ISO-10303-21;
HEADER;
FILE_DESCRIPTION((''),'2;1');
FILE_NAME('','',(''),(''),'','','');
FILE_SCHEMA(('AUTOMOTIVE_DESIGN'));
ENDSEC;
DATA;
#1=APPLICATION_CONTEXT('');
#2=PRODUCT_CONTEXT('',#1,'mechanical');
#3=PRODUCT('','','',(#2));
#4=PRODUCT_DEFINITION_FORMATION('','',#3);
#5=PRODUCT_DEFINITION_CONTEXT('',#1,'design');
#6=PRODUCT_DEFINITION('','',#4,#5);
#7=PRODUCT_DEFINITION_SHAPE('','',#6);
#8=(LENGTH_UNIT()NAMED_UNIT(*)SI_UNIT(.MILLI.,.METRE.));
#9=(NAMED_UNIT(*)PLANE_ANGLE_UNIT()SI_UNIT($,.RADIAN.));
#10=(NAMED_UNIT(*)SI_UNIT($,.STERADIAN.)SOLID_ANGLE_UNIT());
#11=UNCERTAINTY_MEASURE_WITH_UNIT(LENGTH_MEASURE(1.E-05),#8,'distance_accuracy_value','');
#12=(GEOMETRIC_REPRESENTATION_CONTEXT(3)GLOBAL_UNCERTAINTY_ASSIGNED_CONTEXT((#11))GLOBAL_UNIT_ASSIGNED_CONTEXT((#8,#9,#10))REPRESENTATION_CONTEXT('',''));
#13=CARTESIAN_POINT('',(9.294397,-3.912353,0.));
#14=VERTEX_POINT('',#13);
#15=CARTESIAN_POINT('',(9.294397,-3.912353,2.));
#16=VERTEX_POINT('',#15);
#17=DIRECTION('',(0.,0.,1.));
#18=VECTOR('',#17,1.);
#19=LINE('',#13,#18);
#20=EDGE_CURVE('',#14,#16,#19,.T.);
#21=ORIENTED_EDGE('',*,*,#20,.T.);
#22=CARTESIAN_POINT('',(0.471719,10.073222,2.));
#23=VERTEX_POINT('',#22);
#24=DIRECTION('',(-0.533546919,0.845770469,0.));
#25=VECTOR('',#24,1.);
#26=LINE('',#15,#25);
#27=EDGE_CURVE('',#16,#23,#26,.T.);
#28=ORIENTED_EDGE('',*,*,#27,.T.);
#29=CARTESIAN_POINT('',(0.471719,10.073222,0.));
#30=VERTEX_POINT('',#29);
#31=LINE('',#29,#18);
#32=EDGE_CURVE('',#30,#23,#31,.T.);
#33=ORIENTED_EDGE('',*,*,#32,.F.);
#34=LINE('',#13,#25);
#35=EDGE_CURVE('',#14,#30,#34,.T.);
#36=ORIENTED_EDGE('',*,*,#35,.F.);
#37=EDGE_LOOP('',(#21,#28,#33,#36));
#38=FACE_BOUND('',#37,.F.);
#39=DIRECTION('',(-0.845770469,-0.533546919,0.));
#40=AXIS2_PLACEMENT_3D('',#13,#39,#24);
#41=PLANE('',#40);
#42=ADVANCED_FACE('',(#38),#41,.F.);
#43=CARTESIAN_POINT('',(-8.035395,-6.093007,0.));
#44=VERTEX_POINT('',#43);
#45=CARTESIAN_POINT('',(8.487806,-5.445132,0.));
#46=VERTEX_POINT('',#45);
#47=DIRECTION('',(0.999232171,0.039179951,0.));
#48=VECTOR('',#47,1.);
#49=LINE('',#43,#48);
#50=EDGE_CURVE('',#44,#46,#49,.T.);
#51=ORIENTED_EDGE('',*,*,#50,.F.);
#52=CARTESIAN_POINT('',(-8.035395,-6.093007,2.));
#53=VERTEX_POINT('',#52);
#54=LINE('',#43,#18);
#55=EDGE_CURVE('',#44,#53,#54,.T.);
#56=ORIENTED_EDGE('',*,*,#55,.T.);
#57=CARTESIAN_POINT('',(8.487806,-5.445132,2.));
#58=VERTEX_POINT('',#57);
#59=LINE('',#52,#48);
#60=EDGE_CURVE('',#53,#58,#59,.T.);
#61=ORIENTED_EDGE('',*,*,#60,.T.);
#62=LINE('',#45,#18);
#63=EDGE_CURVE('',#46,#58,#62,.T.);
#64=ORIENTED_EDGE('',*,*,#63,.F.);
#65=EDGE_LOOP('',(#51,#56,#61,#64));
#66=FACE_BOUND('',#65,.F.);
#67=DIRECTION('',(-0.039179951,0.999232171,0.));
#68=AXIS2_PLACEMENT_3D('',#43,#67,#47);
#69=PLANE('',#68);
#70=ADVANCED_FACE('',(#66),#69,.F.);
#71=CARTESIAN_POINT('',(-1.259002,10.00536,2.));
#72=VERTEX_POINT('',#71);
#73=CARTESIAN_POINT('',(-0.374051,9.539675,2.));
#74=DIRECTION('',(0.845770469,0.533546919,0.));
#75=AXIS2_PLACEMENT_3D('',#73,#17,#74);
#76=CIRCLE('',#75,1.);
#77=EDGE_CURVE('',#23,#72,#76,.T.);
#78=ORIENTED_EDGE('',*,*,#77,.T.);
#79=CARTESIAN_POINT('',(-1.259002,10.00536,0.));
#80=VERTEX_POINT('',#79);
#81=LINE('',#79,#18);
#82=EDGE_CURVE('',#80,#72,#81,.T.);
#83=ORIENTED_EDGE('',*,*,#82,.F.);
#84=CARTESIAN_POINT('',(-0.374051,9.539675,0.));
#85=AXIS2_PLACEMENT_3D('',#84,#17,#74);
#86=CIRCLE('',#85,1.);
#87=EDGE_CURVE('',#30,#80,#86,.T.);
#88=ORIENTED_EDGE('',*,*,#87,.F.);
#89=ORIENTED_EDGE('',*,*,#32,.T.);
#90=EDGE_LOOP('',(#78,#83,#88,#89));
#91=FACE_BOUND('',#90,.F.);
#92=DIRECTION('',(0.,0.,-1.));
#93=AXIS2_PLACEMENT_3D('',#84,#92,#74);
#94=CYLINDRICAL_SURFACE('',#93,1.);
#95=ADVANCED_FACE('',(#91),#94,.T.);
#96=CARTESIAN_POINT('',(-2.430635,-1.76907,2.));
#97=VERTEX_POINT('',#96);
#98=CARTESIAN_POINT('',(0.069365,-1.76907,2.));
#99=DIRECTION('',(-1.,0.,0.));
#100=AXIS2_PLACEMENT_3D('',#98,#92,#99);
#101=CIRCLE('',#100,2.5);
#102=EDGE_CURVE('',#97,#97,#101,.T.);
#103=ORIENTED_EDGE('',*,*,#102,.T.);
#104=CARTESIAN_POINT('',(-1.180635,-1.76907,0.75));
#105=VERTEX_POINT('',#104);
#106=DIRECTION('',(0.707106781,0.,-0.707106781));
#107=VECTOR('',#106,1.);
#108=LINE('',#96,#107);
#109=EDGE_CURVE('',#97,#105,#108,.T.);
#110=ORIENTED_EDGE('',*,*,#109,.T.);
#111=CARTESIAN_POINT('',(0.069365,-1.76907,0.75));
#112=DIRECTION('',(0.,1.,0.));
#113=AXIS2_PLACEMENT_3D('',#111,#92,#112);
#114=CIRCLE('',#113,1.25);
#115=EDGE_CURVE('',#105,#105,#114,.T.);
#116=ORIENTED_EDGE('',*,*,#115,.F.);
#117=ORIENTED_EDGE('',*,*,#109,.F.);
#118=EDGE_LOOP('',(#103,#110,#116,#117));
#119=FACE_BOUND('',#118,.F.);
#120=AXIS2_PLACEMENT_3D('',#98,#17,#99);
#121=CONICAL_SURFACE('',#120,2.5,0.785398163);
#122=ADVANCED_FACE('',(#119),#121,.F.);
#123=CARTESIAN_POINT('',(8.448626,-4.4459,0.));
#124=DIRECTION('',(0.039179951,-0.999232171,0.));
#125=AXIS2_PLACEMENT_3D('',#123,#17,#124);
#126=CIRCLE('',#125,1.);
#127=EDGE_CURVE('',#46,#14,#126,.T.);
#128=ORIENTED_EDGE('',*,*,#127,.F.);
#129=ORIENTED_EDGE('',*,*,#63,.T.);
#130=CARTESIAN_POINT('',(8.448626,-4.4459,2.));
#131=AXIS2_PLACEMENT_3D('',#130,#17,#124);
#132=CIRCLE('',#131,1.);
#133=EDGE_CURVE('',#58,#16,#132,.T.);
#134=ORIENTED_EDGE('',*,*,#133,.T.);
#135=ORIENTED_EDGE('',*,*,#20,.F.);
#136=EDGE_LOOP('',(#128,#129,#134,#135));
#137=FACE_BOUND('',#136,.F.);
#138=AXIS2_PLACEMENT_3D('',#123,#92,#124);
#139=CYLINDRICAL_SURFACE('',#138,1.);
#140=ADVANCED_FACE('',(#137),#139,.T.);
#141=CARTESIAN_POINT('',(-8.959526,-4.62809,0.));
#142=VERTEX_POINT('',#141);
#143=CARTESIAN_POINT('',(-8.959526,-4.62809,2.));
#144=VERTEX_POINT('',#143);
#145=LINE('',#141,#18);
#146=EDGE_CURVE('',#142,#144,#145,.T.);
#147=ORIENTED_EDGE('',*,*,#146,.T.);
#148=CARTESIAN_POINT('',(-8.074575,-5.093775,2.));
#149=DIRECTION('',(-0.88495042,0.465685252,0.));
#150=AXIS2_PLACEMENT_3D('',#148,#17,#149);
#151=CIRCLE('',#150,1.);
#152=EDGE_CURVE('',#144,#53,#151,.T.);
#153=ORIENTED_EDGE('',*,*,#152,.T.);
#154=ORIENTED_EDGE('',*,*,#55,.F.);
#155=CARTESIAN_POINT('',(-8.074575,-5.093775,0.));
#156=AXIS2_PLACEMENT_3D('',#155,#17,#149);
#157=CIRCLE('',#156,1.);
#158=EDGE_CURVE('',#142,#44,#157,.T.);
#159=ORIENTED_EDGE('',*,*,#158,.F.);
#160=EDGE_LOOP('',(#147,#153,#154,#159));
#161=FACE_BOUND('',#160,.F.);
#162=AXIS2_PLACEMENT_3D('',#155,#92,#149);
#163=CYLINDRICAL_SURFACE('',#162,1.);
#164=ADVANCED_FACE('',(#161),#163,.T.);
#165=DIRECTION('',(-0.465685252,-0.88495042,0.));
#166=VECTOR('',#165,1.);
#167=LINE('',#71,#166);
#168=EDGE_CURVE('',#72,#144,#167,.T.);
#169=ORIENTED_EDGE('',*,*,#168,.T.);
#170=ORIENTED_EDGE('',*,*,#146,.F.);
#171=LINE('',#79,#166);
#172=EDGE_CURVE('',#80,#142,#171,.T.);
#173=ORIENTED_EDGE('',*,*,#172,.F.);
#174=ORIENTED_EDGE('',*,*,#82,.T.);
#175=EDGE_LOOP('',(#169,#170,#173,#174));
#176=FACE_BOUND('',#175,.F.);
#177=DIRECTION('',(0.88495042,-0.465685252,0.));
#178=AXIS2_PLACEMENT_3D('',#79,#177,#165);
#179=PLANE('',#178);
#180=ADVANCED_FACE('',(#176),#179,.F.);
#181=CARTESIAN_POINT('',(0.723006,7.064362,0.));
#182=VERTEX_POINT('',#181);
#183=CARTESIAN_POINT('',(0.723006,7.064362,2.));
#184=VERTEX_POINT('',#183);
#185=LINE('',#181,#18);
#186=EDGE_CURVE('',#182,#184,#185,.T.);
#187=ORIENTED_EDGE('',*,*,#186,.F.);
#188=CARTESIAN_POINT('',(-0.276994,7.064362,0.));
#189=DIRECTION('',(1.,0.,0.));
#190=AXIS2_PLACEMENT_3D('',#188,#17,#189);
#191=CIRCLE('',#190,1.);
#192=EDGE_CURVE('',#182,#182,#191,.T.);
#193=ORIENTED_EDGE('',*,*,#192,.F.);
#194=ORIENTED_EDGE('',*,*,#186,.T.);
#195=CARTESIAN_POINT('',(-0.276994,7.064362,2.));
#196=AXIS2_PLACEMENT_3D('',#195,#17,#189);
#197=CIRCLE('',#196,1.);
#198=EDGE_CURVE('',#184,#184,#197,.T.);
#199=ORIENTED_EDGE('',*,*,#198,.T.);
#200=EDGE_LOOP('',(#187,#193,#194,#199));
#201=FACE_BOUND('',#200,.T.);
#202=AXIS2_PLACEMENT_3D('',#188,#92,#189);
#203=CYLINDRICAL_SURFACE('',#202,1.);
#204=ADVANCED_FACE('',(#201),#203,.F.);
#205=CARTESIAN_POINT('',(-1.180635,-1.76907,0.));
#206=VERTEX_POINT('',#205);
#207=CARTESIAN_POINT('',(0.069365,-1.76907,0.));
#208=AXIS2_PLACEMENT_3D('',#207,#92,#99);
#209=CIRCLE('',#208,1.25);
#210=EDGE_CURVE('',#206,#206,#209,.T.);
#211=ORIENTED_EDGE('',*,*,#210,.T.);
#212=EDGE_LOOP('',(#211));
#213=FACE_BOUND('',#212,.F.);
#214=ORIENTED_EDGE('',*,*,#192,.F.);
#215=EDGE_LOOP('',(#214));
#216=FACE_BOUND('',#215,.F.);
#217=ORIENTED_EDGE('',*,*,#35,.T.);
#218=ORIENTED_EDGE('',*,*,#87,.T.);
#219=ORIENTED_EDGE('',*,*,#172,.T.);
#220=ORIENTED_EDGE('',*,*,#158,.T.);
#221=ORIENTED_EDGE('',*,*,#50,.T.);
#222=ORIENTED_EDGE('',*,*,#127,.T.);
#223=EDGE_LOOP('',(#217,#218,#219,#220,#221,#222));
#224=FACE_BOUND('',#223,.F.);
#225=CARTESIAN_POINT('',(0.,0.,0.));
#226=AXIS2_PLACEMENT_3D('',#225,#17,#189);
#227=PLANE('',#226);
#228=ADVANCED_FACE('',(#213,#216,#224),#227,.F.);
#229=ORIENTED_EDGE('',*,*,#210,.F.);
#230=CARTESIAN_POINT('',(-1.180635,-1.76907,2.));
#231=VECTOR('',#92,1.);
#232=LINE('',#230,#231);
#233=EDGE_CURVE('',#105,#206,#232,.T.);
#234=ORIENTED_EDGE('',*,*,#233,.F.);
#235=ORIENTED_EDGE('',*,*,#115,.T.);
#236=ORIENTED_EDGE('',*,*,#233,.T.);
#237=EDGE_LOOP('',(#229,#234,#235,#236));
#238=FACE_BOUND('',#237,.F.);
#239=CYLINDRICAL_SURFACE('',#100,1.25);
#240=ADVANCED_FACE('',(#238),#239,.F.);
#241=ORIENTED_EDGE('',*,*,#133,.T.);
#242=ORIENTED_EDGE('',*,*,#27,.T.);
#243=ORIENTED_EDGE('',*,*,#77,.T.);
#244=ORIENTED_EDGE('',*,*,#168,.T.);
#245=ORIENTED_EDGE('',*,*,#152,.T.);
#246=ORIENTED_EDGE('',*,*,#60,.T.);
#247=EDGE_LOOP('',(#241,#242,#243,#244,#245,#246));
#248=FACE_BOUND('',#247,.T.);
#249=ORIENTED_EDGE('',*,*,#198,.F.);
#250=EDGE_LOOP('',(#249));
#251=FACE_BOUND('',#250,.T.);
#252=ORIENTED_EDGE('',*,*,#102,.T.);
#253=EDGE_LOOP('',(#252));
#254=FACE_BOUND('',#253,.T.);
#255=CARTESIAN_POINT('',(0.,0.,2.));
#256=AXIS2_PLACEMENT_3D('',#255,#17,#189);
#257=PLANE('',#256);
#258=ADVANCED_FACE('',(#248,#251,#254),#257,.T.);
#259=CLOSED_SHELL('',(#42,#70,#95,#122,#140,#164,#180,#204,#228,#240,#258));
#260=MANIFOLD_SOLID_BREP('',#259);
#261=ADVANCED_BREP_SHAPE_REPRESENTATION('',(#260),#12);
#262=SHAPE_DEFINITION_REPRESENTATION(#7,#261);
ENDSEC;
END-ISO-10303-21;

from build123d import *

# Parameters (mm, degrees)
F0_R           = 1
F1_DEPTH       = 2
F3_D           = 2.5
F3_DEPTH       = 15.81
F3_CSINK_D     = 5
F3_CSINK_ANGLE = 90
F3_TIP         = 0.7510757738


# Not quite as in the source:
# - a feature names something its author has since deleted; it is built from what else it names


with BuildPart() as f1:
    # F0 (on Top) → F1 (new body)
    with BuildSketch(Plane.XY):
        with BuildLine():
            Line((-8.0353952667, -6.0930074749), (8.4878063746, -5.4451317825))
            ThreePointArc((8.4878063746, -5.4451317825), (9.3335768433, -4.9115848639), (9.2943968921, -3.912352693))
            Line((9.2943968921, -3.912352693), (0.4717192633, 10.0732218341))
            ThreePointArc((0.4717192633, 10.0732218341), (-0.4132311567, 10.5389070865), (-1.2590016254, 10.0053601679))
            Line((-1.2590016254, 10.0053601679), (-8.9595256379, -4.6280900516))
            ThreePointArc((-8.9595256379, -4.6280900516), (-8.9203456867, -5.6273222225), (-8.0353952667, -6.0930074749))
        make_face()
        with Locations((-0.2769940404, 7.0643619393)):
            Circle(F0_R, mode=Mode.SUBTRACT)
    extrude(amount=F1_DEPTH)

    # F3
    with Locations(Plane.XY.offset(2)):
        with Locations((0.0693653225, -1.7690696287)):
            CounterSinkHole(F3_D / 2, F3_CSINK_D / 2, depth=F3_DEPTH, counter_sink_angle=F3_CSINK_ANGLE)
            with Locations((0, 0, -(F3_DEPTH + F3_TIP / 2))):  # 118° drill point
                Cone(0, F3_D / 2, F3_TIP, mode=Mode.SUBTRACT)


solid = f1.part
